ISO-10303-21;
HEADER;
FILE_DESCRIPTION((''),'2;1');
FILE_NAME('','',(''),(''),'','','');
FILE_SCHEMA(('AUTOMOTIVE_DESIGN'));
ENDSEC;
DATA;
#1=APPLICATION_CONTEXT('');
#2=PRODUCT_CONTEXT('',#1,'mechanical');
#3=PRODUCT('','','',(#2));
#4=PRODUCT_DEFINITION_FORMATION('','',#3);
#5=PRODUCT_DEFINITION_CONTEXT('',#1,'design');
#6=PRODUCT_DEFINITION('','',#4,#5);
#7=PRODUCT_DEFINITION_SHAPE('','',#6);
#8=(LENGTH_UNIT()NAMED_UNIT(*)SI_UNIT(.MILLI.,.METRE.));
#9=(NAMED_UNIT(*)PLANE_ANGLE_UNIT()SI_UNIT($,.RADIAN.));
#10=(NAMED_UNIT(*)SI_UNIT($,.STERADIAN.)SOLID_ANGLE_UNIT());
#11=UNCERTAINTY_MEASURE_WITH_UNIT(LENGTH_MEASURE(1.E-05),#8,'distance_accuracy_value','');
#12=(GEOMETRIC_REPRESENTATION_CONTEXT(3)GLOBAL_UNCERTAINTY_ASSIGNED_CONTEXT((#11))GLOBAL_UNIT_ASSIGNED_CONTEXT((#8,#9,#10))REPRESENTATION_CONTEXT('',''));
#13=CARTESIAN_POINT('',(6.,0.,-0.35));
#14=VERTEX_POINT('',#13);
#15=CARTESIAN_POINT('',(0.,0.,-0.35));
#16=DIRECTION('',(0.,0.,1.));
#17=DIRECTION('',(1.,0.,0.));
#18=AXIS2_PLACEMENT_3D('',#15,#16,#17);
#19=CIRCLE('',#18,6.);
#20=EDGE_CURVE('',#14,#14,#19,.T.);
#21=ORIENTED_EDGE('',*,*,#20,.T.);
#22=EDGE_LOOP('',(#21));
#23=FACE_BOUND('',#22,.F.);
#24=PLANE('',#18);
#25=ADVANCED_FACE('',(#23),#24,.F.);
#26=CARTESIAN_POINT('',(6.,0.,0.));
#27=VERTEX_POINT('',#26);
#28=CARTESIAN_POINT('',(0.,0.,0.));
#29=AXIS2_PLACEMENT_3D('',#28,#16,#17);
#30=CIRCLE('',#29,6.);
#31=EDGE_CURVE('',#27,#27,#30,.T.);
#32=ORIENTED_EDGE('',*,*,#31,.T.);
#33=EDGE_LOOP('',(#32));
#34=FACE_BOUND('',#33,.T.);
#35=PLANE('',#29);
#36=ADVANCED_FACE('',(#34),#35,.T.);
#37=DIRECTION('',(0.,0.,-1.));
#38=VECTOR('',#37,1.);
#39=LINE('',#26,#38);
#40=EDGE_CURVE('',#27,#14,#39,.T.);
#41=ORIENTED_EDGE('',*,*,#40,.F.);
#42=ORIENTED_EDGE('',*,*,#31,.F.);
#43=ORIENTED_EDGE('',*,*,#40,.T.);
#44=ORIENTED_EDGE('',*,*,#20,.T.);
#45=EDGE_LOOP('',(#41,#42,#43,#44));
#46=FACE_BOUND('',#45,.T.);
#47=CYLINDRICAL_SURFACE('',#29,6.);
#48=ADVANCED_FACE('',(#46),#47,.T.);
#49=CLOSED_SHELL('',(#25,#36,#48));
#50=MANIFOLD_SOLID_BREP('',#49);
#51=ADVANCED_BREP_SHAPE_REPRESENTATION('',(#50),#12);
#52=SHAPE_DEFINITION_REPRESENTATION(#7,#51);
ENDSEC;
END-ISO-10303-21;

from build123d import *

# Parameters (mm, degrees)
F0_R     = 6
F1_DEPTH = 0.35


# Not quite as in the source:
# - a feature names something its author has since deleted; it is built from what else it names


with BuildPart() as f1:
    # F0 (on Top) → F1 (new body)
    with BuildSketch(Plane.XY):
        Circle(F0_R)
    extrude(amount=-F1_DEPTH)


solid = f1.part
